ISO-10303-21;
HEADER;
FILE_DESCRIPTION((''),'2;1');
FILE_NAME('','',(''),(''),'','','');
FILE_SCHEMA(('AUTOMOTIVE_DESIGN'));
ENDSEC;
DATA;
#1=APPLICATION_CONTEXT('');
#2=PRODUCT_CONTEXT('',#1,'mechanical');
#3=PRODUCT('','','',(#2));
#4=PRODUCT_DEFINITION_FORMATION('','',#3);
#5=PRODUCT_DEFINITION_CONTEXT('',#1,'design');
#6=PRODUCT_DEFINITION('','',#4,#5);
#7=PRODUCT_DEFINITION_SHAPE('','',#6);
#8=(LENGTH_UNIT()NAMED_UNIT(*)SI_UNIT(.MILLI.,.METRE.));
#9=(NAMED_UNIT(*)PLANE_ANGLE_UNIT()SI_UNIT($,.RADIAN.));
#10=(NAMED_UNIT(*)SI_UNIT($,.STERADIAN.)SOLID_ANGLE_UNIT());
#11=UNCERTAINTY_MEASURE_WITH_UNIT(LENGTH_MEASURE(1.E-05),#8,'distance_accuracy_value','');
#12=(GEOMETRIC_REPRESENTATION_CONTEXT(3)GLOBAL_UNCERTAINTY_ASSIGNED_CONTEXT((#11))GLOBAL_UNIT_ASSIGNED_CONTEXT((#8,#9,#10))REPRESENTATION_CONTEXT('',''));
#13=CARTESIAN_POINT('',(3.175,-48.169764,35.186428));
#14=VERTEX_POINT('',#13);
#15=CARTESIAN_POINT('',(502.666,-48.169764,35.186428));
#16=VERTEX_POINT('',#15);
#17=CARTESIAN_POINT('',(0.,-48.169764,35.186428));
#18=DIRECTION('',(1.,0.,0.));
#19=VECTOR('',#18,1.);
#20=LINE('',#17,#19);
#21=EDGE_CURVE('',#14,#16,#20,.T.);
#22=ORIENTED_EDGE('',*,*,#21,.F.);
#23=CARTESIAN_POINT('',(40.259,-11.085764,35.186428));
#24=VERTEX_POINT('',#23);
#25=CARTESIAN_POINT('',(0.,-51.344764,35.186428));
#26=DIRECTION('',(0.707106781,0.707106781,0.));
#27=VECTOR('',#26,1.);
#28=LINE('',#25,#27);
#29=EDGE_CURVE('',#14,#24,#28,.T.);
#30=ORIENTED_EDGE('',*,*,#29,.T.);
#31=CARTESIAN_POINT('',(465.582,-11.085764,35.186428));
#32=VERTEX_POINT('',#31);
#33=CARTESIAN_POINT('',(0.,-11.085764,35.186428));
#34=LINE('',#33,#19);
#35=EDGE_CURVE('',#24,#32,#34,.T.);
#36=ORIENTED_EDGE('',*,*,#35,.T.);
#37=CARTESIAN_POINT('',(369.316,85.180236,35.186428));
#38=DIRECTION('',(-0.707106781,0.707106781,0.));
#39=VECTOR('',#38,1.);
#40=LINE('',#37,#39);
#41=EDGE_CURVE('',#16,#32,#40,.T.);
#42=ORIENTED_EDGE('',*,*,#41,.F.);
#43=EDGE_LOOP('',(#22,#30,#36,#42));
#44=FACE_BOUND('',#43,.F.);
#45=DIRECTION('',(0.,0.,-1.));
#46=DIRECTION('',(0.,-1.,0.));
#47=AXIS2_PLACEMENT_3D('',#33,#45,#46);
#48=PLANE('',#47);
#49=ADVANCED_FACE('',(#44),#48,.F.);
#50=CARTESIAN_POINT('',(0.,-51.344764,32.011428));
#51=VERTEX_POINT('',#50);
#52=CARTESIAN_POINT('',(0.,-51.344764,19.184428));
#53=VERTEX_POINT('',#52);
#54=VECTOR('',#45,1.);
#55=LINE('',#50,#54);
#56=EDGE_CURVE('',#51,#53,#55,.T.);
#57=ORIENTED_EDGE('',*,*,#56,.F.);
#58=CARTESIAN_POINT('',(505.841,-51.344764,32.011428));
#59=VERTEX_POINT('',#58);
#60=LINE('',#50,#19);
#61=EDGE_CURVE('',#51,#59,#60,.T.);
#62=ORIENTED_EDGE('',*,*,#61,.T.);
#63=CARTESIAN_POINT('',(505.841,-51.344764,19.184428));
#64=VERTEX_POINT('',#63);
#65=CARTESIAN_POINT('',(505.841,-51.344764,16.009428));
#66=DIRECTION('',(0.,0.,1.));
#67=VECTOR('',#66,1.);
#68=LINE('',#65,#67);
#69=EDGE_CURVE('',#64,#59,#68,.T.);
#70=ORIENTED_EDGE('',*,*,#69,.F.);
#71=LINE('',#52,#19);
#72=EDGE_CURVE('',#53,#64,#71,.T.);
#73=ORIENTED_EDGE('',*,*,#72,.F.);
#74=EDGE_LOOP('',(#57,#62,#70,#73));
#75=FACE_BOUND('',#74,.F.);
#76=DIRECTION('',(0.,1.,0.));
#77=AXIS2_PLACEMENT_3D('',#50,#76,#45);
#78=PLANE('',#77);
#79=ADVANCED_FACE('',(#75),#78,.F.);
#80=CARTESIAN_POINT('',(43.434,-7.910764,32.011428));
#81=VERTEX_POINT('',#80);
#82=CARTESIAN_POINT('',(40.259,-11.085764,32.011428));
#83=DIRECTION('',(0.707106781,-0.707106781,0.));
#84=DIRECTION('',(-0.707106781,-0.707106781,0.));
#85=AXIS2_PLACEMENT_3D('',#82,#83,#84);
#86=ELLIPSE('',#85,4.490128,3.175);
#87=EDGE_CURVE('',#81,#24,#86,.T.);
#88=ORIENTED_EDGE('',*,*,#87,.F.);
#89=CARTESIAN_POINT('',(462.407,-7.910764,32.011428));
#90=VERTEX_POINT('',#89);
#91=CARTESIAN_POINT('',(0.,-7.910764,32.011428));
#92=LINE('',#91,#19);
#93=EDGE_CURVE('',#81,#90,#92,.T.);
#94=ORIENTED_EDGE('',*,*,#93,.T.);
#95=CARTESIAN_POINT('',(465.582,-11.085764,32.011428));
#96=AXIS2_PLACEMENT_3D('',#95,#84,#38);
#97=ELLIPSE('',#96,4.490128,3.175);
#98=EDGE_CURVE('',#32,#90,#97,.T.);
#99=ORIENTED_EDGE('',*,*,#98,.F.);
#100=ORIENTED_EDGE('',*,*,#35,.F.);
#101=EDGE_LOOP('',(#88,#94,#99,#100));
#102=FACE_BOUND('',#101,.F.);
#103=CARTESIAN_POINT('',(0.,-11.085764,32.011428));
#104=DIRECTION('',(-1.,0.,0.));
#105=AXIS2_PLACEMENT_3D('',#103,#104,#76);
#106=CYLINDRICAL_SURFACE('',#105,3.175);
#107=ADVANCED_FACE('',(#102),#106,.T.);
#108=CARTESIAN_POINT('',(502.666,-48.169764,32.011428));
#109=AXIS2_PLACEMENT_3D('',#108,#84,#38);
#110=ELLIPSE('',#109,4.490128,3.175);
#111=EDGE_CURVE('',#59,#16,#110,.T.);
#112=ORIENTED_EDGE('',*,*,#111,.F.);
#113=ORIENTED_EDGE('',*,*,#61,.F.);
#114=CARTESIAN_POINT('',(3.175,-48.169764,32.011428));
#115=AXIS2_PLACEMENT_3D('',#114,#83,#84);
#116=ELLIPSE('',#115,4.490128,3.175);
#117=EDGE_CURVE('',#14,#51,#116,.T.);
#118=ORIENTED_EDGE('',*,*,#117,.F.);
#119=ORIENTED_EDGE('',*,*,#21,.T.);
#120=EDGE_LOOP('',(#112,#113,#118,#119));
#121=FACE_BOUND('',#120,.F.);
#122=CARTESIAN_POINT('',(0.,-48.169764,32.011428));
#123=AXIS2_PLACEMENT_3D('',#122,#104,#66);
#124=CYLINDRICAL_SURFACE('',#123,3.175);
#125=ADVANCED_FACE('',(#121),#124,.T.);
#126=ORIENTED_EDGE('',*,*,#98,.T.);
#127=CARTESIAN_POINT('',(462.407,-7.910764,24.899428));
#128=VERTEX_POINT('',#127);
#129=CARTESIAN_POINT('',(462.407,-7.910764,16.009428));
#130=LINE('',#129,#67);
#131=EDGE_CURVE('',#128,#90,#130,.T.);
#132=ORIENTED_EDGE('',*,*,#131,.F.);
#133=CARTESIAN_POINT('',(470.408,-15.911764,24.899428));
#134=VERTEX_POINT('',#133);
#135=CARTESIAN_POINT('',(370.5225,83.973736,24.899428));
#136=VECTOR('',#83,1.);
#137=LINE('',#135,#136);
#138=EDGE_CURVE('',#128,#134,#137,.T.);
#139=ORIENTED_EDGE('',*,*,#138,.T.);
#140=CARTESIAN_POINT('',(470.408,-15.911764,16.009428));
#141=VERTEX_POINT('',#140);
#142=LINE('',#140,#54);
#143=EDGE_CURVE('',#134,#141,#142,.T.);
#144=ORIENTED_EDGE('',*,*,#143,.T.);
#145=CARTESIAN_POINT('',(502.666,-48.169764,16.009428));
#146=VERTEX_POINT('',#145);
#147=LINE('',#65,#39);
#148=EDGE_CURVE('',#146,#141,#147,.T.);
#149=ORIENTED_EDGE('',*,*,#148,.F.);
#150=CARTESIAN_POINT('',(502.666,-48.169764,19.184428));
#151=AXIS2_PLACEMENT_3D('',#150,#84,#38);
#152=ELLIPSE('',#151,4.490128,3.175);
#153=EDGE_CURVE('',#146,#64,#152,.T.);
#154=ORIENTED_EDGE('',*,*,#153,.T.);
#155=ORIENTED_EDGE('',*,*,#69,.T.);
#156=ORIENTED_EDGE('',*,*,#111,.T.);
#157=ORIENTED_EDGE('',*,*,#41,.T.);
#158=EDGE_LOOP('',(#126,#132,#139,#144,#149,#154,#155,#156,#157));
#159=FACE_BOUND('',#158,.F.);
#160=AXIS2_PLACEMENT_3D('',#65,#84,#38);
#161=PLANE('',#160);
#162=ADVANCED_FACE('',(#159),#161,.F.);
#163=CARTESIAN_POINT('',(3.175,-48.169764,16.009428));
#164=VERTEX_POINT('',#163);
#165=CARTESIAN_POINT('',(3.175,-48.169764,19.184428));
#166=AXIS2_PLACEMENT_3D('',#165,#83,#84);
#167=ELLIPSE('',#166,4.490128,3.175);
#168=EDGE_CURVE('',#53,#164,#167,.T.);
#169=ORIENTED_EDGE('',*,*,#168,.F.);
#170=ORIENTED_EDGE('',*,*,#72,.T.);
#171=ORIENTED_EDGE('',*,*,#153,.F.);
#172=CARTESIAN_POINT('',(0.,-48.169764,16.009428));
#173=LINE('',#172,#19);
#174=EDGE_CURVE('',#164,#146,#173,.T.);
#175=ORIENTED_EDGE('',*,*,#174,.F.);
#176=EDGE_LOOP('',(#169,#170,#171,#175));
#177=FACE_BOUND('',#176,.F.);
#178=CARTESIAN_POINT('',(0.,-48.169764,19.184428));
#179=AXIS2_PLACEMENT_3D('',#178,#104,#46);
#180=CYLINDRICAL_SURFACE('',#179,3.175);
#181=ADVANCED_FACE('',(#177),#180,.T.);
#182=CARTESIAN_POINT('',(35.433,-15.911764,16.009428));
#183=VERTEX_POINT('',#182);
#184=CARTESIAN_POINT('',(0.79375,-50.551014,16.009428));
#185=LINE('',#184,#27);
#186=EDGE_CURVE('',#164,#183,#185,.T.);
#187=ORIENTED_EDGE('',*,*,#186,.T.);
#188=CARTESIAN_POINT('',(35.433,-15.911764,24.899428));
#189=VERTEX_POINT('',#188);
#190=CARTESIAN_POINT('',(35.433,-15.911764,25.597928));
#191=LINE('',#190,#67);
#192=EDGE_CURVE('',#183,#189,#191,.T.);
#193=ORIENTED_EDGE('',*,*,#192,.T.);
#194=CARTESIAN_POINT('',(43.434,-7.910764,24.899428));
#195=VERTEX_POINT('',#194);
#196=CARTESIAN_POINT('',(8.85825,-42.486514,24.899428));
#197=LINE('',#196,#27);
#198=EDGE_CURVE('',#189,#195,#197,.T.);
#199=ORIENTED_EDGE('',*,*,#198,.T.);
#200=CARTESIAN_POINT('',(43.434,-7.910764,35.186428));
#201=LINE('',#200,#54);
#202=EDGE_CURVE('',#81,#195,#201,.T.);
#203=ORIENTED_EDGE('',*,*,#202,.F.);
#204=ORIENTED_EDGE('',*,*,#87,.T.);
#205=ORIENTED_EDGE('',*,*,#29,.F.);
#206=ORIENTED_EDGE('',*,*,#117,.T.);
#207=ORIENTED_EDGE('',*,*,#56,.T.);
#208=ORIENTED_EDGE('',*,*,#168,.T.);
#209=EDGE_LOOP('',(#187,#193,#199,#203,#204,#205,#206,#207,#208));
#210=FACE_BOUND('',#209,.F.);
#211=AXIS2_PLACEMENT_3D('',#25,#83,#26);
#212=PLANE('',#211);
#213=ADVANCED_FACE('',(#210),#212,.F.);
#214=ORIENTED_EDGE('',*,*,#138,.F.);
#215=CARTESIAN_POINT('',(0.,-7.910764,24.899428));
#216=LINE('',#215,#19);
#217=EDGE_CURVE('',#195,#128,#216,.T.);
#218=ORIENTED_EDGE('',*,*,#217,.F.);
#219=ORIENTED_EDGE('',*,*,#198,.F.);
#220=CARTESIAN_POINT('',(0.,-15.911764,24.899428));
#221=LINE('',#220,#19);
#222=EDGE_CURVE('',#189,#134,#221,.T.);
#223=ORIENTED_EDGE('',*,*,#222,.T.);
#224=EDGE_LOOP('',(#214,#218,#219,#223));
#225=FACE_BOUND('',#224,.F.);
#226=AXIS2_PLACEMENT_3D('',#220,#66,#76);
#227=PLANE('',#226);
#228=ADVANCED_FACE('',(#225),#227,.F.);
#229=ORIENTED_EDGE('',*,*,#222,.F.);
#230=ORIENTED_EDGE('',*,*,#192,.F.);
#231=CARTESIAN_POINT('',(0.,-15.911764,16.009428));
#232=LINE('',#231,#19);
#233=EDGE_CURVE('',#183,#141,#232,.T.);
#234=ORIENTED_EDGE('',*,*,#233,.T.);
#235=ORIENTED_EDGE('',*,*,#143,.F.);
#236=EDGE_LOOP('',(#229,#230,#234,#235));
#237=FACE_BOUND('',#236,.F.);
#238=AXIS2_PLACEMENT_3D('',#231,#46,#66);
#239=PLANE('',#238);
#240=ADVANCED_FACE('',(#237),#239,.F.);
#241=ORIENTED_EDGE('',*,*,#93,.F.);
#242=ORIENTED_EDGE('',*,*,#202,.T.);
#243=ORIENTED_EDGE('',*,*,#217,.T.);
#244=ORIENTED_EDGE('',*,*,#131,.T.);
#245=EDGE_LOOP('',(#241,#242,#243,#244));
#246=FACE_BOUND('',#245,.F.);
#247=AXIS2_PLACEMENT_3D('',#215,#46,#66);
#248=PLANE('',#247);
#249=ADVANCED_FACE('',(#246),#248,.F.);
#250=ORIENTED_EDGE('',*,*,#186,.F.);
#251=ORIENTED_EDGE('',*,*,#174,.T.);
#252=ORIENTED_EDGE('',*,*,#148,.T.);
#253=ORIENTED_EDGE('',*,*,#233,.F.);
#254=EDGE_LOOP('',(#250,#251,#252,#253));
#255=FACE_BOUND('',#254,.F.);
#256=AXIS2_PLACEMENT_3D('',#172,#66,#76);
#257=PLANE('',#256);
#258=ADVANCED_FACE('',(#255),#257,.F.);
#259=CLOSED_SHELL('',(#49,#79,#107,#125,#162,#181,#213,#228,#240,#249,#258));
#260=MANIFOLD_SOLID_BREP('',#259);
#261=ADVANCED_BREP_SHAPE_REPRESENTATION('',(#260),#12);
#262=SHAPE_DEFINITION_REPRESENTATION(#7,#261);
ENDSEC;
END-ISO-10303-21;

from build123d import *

# Parameters (mm, degrees)
F1_DEPTH = 558.8
F3_DEPTH = 19.178
F5_DEPTH = 19.178
F7_DEPTH = 19.178


with BuildPart() as f1:
    # F0 (on Right) → F1 (new body)
    with BuildSketch(Plane.YZ):
        with BuildLine():
            Line((-11.0857636662, 35.1864280597), (-48.1697636662, 35.1864280597))
            ThreePointArc((-48.1697636662, 35.1864280597), (-50.4148276965, 34.25649209), (-51.3447636662, 32.0114280597))
            Line((-51.3447636662, 32.0114280597), (-51.3447636662, 19.1844280597))
            ThreePointArc((-51.3447636662, 19.1844280597), (-50.4148276965, 16.9393640294), (-48.1697636662, 16.0094280597))
            Line((-48.1697636662, 16.0094280597), (-15.9117636662, 16.0094280597))
            Line((-15.9117636662, 16.0094280597), (-15.9117636662, 24.8994280597))
            Line((-15.9117636662, 24.8994280597), (-7.9107636662, 24.8994280597))
            Line((-7.9107636662, 24.8994280597), (-7.9107636662, 32.0114280597))
            ThreePointArc((-7.9107636662, 32.0114280597), (-8.8406996359, 34.25649209), (-11.0857636662, 35.1864280597))
        make_face()
    extrude(amount=F1_DEPTH)

    # F2 (on face) → F3 (cut, through all)
    with BuildSketch(Plane.XY.offset(35.1864280597)):
        Polygon((0, -11.0857636662), (40.259, -11.0857636662), (43.434, -7.9107636662), (0, -7.9107636662), align=None)
        Polygon((0, -48.1697636662), (3.175, -48.1697636662), (40.259, -11.0857636662), (0, -11.0857636662), align=None)
        Polygon((0, -48.1697636662), (0, -51.3447636662), (3.175, -48.1697636662), align=None)
    extrude(amount=-F3_DEPTH, mode=Mode.SUBTRACT)

    # F4 (on face) → F5 (cut, through all)
    with BuildSketch(Plane(origin=(0, 0, 16.0094280597), x_dir=(1, 0, 0), z_dir=(0, 0, -1))):
        Polygon((558.8, 48.1697636662), (558.8, 51.3447636662), (521.843, 51.3447636662), (518.668, 48.1697636662), align=None)
        Polygon((558.8, 15.9117636662), (558.8, 48.1697636662), (518.668, 48.1697636662), (486.41, 15.9117636662), align=None)
        Polygon((558.8, 7.9107636662), (558.8, 15.9117636662), (486.41, 15.9117636662), (478.409, 7.9107636662), align=None)
    extrude(amount=-F5_DEPTH, mode=Mode.SUBTRACT)

    # F6 (on face) → F7 (cut, through all)
    with BuildSketch(Plane(origin=(0, 0, 16.0094280597), x_dir=(1, 0, 0), z_dir=(0, 0, -1))):
        Polygon((470.408, 15.9117636662), (470.408, 15.5282095075), (470.408, 14.7099299356), (470.408, 7.9107636662), (478.409, 7.9107636662), (486.41, 15.9117636662), align=None)
        Polygon((470.408, 14.7099299356), (470.408, 15.5282095075), (470.408, 15.9117636662), (462.407, 7.9107636662), (470.408, 7.9107636662), align=None)
        Polygon((502.666, 48.1697636662), (470.408, 15.9117636662), (486.41, 15.9117636662), (518.668, 48.1697636662), align=None)
        Polygon((505.841, 51.3447636662), (502.666, 48.1697636662), (518.668, 48.1697636662), (521.843, 51.3447636662), align=None)
    extrude(amount=-F7_DEPTH, mode=Mode.SUBTRACT)


solid = f1.part
